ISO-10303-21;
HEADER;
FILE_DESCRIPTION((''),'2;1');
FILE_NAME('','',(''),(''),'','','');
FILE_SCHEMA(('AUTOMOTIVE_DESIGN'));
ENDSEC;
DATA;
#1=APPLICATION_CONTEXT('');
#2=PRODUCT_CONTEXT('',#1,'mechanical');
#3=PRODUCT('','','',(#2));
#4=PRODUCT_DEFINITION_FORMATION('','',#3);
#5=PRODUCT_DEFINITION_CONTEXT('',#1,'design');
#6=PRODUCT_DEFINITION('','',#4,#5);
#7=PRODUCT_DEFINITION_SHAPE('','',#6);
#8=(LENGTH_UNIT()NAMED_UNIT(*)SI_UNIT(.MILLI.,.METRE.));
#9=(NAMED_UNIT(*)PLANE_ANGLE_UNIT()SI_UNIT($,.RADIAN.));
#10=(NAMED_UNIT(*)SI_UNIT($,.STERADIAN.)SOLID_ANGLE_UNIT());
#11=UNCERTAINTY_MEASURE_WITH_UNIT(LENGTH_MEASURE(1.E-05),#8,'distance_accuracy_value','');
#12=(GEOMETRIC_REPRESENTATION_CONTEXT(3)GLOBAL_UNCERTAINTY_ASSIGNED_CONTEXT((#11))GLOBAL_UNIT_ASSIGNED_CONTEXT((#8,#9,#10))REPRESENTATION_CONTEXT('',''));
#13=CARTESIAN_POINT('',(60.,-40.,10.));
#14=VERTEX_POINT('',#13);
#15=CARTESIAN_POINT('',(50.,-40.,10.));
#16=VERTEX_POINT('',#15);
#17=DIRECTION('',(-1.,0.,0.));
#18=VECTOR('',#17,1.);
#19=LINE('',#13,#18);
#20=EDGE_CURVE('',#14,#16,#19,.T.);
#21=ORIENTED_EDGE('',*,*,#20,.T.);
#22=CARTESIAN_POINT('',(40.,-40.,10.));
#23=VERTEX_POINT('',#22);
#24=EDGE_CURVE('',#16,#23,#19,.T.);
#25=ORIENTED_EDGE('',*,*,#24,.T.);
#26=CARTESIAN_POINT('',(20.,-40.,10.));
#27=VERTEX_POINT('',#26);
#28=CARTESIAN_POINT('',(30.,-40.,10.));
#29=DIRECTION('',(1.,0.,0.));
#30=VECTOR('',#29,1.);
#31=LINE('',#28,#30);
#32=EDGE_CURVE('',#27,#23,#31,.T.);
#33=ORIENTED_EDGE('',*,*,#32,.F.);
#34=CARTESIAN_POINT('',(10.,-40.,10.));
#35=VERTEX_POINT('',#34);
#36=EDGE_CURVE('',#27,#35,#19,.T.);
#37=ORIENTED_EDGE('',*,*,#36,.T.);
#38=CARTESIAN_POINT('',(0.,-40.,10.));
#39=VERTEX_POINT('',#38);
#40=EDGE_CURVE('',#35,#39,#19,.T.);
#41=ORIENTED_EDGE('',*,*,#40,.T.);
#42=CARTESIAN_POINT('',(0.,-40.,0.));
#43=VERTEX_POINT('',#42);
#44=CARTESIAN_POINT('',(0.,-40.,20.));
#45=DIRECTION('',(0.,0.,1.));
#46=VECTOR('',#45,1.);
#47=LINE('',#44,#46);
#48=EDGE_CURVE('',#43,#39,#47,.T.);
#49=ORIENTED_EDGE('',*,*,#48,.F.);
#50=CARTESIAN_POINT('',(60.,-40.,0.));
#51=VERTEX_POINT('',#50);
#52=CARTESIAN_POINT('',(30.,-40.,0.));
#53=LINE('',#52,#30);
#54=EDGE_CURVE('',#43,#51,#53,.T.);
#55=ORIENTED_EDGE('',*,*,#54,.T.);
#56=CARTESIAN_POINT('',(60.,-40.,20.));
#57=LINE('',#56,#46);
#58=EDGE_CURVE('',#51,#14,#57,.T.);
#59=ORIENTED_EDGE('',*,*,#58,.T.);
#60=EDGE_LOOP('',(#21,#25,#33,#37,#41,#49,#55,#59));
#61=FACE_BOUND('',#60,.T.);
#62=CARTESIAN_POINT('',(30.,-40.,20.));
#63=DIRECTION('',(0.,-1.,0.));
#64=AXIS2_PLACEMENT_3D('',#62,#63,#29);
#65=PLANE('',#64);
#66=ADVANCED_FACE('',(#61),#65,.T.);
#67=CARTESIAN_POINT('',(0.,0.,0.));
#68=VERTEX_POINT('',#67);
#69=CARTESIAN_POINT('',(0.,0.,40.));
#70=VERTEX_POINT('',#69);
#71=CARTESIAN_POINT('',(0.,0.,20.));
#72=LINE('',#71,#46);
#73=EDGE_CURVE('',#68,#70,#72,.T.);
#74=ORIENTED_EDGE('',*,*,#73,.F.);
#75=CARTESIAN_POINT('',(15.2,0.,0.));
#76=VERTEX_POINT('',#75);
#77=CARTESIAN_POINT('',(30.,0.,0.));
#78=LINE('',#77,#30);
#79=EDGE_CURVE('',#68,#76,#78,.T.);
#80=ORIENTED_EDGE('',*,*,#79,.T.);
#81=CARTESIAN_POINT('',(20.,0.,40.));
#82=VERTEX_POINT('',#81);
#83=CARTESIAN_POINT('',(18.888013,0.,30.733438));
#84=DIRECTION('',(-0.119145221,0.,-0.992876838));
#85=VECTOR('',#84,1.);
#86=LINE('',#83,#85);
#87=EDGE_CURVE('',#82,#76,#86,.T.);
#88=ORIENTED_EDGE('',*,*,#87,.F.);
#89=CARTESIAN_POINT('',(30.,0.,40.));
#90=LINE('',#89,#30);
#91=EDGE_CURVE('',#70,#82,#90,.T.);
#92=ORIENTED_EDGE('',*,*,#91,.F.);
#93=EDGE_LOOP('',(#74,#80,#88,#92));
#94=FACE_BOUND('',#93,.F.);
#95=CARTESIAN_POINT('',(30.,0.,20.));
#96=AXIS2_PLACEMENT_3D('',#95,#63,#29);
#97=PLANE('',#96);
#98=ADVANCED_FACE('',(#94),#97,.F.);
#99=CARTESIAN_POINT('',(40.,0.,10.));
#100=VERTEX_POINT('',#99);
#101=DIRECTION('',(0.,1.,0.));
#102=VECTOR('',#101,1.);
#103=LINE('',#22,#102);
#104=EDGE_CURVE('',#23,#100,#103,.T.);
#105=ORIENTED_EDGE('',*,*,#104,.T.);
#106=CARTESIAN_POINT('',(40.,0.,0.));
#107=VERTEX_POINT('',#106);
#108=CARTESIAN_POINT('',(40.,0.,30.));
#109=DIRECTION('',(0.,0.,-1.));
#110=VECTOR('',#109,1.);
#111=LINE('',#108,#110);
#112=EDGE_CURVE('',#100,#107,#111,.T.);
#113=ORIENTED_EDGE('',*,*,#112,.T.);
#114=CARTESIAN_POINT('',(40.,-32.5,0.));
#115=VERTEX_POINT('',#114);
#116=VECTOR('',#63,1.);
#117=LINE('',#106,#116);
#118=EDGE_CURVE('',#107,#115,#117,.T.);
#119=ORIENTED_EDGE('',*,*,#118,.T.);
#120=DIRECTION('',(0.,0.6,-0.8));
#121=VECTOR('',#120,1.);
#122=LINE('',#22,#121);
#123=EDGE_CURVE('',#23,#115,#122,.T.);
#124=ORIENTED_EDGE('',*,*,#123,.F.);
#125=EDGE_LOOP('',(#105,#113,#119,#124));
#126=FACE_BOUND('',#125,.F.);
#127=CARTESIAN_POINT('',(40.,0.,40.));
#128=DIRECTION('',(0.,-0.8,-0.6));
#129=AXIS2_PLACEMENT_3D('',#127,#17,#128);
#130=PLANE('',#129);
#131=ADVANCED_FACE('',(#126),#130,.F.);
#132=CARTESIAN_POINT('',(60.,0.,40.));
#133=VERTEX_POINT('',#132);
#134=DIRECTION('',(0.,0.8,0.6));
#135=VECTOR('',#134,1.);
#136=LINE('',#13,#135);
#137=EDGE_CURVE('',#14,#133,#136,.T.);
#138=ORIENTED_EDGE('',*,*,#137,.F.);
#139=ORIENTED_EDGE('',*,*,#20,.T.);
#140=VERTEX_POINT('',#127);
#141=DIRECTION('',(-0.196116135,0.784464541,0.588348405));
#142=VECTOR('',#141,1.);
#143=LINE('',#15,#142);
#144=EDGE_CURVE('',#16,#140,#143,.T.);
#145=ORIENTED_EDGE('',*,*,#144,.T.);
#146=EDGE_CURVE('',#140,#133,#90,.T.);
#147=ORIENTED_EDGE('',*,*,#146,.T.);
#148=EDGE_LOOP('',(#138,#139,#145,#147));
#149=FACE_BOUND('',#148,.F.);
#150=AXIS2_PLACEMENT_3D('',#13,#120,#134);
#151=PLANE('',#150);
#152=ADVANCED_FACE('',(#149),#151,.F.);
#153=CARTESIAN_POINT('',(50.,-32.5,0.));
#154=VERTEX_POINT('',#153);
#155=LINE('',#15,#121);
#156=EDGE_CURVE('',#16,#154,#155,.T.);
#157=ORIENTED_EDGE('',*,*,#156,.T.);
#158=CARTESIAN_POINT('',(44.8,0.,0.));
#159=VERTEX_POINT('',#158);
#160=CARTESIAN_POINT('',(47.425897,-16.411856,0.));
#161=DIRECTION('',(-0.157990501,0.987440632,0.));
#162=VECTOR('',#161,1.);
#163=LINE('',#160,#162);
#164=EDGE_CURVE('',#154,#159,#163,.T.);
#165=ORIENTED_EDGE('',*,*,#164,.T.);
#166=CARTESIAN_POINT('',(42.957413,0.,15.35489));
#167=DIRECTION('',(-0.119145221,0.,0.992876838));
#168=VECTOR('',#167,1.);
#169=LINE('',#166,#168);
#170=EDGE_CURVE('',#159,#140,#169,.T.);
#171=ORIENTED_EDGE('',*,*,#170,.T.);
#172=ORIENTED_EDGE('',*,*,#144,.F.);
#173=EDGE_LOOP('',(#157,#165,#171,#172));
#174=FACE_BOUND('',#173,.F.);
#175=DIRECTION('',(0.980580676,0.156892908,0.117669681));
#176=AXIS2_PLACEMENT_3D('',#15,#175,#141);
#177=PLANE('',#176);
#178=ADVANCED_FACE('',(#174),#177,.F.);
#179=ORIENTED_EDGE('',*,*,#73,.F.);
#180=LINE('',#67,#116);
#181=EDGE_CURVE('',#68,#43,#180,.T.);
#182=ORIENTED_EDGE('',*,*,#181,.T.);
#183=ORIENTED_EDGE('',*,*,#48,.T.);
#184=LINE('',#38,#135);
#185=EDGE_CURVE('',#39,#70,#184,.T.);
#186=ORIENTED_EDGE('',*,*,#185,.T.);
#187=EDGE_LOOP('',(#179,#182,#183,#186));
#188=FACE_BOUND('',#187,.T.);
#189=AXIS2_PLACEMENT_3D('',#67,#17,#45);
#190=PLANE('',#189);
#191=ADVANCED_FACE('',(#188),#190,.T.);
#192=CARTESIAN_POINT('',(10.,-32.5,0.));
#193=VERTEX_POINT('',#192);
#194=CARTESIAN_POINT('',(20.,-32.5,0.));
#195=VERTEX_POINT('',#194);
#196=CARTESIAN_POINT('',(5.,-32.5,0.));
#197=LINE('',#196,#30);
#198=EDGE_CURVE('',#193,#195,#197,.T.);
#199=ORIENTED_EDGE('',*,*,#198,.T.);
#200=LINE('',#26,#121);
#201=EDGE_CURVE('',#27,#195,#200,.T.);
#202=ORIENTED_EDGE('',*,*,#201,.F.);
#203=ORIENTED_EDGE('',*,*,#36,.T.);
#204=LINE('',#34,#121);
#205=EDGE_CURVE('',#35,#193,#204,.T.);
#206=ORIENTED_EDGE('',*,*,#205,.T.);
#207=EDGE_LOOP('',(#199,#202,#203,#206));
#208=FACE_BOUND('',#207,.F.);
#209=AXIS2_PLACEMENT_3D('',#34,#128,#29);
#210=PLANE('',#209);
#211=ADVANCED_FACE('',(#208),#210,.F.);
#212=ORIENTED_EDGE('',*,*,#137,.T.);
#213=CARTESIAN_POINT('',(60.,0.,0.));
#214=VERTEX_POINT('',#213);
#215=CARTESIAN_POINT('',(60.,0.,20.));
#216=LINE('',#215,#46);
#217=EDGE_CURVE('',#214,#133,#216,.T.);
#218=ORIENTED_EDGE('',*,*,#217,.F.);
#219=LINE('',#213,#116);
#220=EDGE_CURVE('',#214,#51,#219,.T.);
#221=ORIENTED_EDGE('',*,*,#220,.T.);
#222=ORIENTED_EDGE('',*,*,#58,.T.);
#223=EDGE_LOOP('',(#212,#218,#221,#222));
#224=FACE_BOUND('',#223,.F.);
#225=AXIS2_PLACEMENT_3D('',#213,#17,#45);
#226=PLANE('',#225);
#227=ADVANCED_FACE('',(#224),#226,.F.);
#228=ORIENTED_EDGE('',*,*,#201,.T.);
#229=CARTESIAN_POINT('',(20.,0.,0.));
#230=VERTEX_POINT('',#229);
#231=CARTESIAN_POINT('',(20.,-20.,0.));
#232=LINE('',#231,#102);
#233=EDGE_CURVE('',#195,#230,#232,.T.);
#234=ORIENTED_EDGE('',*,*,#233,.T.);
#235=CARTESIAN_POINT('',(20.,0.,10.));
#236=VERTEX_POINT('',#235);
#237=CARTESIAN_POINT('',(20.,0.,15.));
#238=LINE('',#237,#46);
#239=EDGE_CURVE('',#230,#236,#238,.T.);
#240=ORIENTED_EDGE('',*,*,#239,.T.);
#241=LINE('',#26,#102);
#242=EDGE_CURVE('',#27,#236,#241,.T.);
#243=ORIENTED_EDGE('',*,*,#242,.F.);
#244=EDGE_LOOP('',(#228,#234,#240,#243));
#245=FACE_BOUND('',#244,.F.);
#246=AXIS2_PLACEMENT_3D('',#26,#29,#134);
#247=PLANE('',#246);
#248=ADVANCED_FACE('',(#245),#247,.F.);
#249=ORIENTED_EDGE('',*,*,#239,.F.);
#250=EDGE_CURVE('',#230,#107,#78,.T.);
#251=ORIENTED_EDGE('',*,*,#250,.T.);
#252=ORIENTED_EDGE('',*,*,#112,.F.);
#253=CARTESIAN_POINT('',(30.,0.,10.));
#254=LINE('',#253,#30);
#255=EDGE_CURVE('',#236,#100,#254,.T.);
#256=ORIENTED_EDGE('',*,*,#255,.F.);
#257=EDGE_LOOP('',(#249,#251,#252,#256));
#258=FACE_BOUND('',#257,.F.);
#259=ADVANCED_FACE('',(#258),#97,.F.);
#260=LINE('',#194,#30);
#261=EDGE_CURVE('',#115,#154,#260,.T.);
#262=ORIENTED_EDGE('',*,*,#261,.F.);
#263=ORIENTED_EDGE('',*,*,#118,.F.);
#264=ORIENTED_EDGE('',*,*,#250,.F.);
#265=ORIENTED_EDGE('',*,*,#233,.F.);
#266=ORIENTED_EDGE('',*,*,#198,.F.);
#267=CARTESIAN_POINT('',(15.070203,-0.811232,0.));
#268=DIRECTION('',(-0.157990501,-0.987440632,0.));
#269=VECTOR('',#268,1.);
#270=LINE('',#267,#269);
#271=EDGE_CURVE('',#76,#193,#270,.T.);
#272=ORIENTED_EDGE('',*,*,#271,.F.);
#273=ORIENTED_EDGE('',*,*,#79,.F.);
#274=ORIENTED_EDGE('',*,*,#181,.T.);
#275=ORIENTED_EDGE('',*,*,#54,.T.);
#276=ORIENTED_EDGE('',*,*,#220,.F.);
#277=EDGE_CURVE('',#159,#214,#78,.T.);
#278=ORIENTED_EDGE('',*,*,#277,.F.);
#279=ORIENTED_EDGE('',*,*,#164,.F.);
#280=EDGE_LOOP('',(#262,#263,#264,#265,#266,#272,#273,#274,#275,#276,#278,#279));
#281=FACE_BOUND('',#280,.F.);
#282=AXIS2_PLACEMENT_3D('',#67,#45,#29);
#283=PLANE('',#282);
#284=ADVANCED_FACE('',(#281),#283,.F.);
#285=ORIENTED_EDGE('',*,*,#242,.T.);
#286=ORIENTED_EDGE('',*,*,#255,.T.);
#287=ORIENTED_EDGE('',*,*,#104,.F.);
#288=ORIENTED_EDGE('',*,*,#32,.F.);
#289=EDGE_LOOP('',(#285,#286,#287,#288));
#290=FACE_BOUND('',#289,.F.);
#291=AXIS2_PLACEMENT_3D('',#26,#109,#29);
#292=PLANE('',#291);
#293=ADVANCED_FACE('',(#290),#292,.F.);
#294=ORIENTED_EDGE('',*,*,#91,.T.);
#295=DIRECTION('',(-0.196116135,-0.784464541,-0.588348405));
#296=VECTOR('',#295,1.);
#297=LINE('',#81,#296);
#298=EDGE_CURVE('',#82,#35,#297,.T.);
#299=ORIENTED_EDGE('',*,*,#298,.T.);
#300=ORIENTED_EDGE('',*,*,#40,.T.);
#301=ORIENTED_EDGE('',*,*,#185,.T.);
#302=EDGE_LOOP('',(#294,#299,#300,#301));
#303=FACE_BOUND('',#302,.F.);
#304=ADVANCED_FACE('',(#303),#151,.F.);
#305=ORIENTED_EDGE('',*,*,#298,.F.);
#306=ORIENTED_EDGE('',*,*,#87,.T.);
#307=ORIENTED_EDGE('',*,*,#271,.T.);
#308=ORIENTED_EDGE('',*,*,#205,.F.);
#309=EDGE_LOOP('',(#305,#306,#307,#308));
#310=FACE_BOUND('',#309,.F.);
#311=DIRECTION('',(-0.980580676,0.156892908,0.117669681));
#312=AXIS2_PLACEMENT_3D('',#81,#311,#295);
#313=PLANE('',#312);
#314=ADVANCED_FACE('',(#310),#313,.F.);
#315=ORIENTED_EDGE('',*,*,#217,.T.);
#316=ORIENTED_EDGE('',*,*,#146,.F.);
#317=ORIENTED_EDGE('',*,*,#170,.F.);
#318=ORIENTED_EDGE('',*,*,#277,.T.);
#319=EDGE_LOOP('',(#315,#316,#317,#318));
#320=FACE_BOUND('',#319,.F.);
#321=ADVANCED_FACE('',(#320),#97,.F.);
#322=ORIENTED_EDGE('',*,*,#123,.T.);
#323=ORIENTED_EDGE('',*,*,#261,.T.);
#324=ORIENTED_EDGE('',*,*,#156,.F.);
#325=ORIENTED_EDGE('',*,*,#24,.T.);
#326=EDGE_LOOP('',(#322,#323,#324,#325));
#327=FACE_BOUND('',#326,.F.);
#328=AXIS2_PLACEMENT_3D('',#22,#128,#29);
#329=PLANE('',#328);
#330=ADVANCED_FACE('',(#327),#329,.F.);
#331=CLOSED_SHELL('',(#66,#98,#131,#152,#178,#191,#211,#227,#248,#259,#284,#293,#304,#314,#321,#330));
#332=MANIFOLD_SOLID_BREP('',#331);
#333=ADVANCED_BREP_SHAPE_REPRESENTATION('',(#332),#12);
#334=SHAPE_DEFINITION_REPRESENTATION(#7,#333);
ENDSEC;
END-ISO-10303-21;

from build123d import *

# Parameters (mm, degrees)
F0_W     = 60
F0_H     = 40
F1_DEPTH = 40
F2_W     = 20
F2_H     = 30
F3_DEPTH = 40
F5_DEPTH = 60
F8_DEPTH = 40


# Not quite as in the source:
# - a feature of the source that left no trace in its solid (it failed there, or was rolled back) is left out


with BuildPart() as f1:
    # F0 (on Front) → F1 (new body)
    with BuildSketch(Plane.XZ):
        with Locations((30, 20)):
            Rectangle(F0_W, F0_H)
    extrude(amount=F1_DEPTH)

    # F2 (on face) → F3 (cut)
    with BuildSketch(Plane.XZ.offset(40)):
        with Locations((30, 25)):
            Rectangle(F2_W, F2_H)
    extrude(amount=-F3_DEPTH, mode=Mode.SUBTRACT)

    # F4 (on face) → F5 (cut)
    with BuildSketch(Plane.YZ.offset(60)):
        Polygon((-40, 40), (-40, 10), (0, 40), align=None)
    extrude(amount=-F5_DEPTH, mode=Mode.SUBTRACT)

    # F6 (on face) + F7 (on face) → F8 (cut)
    with BuildSketch(Plane(origin=(0, -19.2, 25.6), x_dir=(1, 0, 0), z_dir=(0, -0.6, 0.8))):
        Polygon((20, -26), (20, 24), (10, -26), align=None)
    with BuildSketch(Plane(origin=(0, -19.2, 25.6), x_dir=(1, 0, 0), z_dir=(0, -0.6, 0.8))):
        Polygon((50, -26), (40, 24), (40, -26), align=None)
    extrude(amount=-F8_DEPTH, mode=Mode.SUBTRACT)


solid = f1.part
